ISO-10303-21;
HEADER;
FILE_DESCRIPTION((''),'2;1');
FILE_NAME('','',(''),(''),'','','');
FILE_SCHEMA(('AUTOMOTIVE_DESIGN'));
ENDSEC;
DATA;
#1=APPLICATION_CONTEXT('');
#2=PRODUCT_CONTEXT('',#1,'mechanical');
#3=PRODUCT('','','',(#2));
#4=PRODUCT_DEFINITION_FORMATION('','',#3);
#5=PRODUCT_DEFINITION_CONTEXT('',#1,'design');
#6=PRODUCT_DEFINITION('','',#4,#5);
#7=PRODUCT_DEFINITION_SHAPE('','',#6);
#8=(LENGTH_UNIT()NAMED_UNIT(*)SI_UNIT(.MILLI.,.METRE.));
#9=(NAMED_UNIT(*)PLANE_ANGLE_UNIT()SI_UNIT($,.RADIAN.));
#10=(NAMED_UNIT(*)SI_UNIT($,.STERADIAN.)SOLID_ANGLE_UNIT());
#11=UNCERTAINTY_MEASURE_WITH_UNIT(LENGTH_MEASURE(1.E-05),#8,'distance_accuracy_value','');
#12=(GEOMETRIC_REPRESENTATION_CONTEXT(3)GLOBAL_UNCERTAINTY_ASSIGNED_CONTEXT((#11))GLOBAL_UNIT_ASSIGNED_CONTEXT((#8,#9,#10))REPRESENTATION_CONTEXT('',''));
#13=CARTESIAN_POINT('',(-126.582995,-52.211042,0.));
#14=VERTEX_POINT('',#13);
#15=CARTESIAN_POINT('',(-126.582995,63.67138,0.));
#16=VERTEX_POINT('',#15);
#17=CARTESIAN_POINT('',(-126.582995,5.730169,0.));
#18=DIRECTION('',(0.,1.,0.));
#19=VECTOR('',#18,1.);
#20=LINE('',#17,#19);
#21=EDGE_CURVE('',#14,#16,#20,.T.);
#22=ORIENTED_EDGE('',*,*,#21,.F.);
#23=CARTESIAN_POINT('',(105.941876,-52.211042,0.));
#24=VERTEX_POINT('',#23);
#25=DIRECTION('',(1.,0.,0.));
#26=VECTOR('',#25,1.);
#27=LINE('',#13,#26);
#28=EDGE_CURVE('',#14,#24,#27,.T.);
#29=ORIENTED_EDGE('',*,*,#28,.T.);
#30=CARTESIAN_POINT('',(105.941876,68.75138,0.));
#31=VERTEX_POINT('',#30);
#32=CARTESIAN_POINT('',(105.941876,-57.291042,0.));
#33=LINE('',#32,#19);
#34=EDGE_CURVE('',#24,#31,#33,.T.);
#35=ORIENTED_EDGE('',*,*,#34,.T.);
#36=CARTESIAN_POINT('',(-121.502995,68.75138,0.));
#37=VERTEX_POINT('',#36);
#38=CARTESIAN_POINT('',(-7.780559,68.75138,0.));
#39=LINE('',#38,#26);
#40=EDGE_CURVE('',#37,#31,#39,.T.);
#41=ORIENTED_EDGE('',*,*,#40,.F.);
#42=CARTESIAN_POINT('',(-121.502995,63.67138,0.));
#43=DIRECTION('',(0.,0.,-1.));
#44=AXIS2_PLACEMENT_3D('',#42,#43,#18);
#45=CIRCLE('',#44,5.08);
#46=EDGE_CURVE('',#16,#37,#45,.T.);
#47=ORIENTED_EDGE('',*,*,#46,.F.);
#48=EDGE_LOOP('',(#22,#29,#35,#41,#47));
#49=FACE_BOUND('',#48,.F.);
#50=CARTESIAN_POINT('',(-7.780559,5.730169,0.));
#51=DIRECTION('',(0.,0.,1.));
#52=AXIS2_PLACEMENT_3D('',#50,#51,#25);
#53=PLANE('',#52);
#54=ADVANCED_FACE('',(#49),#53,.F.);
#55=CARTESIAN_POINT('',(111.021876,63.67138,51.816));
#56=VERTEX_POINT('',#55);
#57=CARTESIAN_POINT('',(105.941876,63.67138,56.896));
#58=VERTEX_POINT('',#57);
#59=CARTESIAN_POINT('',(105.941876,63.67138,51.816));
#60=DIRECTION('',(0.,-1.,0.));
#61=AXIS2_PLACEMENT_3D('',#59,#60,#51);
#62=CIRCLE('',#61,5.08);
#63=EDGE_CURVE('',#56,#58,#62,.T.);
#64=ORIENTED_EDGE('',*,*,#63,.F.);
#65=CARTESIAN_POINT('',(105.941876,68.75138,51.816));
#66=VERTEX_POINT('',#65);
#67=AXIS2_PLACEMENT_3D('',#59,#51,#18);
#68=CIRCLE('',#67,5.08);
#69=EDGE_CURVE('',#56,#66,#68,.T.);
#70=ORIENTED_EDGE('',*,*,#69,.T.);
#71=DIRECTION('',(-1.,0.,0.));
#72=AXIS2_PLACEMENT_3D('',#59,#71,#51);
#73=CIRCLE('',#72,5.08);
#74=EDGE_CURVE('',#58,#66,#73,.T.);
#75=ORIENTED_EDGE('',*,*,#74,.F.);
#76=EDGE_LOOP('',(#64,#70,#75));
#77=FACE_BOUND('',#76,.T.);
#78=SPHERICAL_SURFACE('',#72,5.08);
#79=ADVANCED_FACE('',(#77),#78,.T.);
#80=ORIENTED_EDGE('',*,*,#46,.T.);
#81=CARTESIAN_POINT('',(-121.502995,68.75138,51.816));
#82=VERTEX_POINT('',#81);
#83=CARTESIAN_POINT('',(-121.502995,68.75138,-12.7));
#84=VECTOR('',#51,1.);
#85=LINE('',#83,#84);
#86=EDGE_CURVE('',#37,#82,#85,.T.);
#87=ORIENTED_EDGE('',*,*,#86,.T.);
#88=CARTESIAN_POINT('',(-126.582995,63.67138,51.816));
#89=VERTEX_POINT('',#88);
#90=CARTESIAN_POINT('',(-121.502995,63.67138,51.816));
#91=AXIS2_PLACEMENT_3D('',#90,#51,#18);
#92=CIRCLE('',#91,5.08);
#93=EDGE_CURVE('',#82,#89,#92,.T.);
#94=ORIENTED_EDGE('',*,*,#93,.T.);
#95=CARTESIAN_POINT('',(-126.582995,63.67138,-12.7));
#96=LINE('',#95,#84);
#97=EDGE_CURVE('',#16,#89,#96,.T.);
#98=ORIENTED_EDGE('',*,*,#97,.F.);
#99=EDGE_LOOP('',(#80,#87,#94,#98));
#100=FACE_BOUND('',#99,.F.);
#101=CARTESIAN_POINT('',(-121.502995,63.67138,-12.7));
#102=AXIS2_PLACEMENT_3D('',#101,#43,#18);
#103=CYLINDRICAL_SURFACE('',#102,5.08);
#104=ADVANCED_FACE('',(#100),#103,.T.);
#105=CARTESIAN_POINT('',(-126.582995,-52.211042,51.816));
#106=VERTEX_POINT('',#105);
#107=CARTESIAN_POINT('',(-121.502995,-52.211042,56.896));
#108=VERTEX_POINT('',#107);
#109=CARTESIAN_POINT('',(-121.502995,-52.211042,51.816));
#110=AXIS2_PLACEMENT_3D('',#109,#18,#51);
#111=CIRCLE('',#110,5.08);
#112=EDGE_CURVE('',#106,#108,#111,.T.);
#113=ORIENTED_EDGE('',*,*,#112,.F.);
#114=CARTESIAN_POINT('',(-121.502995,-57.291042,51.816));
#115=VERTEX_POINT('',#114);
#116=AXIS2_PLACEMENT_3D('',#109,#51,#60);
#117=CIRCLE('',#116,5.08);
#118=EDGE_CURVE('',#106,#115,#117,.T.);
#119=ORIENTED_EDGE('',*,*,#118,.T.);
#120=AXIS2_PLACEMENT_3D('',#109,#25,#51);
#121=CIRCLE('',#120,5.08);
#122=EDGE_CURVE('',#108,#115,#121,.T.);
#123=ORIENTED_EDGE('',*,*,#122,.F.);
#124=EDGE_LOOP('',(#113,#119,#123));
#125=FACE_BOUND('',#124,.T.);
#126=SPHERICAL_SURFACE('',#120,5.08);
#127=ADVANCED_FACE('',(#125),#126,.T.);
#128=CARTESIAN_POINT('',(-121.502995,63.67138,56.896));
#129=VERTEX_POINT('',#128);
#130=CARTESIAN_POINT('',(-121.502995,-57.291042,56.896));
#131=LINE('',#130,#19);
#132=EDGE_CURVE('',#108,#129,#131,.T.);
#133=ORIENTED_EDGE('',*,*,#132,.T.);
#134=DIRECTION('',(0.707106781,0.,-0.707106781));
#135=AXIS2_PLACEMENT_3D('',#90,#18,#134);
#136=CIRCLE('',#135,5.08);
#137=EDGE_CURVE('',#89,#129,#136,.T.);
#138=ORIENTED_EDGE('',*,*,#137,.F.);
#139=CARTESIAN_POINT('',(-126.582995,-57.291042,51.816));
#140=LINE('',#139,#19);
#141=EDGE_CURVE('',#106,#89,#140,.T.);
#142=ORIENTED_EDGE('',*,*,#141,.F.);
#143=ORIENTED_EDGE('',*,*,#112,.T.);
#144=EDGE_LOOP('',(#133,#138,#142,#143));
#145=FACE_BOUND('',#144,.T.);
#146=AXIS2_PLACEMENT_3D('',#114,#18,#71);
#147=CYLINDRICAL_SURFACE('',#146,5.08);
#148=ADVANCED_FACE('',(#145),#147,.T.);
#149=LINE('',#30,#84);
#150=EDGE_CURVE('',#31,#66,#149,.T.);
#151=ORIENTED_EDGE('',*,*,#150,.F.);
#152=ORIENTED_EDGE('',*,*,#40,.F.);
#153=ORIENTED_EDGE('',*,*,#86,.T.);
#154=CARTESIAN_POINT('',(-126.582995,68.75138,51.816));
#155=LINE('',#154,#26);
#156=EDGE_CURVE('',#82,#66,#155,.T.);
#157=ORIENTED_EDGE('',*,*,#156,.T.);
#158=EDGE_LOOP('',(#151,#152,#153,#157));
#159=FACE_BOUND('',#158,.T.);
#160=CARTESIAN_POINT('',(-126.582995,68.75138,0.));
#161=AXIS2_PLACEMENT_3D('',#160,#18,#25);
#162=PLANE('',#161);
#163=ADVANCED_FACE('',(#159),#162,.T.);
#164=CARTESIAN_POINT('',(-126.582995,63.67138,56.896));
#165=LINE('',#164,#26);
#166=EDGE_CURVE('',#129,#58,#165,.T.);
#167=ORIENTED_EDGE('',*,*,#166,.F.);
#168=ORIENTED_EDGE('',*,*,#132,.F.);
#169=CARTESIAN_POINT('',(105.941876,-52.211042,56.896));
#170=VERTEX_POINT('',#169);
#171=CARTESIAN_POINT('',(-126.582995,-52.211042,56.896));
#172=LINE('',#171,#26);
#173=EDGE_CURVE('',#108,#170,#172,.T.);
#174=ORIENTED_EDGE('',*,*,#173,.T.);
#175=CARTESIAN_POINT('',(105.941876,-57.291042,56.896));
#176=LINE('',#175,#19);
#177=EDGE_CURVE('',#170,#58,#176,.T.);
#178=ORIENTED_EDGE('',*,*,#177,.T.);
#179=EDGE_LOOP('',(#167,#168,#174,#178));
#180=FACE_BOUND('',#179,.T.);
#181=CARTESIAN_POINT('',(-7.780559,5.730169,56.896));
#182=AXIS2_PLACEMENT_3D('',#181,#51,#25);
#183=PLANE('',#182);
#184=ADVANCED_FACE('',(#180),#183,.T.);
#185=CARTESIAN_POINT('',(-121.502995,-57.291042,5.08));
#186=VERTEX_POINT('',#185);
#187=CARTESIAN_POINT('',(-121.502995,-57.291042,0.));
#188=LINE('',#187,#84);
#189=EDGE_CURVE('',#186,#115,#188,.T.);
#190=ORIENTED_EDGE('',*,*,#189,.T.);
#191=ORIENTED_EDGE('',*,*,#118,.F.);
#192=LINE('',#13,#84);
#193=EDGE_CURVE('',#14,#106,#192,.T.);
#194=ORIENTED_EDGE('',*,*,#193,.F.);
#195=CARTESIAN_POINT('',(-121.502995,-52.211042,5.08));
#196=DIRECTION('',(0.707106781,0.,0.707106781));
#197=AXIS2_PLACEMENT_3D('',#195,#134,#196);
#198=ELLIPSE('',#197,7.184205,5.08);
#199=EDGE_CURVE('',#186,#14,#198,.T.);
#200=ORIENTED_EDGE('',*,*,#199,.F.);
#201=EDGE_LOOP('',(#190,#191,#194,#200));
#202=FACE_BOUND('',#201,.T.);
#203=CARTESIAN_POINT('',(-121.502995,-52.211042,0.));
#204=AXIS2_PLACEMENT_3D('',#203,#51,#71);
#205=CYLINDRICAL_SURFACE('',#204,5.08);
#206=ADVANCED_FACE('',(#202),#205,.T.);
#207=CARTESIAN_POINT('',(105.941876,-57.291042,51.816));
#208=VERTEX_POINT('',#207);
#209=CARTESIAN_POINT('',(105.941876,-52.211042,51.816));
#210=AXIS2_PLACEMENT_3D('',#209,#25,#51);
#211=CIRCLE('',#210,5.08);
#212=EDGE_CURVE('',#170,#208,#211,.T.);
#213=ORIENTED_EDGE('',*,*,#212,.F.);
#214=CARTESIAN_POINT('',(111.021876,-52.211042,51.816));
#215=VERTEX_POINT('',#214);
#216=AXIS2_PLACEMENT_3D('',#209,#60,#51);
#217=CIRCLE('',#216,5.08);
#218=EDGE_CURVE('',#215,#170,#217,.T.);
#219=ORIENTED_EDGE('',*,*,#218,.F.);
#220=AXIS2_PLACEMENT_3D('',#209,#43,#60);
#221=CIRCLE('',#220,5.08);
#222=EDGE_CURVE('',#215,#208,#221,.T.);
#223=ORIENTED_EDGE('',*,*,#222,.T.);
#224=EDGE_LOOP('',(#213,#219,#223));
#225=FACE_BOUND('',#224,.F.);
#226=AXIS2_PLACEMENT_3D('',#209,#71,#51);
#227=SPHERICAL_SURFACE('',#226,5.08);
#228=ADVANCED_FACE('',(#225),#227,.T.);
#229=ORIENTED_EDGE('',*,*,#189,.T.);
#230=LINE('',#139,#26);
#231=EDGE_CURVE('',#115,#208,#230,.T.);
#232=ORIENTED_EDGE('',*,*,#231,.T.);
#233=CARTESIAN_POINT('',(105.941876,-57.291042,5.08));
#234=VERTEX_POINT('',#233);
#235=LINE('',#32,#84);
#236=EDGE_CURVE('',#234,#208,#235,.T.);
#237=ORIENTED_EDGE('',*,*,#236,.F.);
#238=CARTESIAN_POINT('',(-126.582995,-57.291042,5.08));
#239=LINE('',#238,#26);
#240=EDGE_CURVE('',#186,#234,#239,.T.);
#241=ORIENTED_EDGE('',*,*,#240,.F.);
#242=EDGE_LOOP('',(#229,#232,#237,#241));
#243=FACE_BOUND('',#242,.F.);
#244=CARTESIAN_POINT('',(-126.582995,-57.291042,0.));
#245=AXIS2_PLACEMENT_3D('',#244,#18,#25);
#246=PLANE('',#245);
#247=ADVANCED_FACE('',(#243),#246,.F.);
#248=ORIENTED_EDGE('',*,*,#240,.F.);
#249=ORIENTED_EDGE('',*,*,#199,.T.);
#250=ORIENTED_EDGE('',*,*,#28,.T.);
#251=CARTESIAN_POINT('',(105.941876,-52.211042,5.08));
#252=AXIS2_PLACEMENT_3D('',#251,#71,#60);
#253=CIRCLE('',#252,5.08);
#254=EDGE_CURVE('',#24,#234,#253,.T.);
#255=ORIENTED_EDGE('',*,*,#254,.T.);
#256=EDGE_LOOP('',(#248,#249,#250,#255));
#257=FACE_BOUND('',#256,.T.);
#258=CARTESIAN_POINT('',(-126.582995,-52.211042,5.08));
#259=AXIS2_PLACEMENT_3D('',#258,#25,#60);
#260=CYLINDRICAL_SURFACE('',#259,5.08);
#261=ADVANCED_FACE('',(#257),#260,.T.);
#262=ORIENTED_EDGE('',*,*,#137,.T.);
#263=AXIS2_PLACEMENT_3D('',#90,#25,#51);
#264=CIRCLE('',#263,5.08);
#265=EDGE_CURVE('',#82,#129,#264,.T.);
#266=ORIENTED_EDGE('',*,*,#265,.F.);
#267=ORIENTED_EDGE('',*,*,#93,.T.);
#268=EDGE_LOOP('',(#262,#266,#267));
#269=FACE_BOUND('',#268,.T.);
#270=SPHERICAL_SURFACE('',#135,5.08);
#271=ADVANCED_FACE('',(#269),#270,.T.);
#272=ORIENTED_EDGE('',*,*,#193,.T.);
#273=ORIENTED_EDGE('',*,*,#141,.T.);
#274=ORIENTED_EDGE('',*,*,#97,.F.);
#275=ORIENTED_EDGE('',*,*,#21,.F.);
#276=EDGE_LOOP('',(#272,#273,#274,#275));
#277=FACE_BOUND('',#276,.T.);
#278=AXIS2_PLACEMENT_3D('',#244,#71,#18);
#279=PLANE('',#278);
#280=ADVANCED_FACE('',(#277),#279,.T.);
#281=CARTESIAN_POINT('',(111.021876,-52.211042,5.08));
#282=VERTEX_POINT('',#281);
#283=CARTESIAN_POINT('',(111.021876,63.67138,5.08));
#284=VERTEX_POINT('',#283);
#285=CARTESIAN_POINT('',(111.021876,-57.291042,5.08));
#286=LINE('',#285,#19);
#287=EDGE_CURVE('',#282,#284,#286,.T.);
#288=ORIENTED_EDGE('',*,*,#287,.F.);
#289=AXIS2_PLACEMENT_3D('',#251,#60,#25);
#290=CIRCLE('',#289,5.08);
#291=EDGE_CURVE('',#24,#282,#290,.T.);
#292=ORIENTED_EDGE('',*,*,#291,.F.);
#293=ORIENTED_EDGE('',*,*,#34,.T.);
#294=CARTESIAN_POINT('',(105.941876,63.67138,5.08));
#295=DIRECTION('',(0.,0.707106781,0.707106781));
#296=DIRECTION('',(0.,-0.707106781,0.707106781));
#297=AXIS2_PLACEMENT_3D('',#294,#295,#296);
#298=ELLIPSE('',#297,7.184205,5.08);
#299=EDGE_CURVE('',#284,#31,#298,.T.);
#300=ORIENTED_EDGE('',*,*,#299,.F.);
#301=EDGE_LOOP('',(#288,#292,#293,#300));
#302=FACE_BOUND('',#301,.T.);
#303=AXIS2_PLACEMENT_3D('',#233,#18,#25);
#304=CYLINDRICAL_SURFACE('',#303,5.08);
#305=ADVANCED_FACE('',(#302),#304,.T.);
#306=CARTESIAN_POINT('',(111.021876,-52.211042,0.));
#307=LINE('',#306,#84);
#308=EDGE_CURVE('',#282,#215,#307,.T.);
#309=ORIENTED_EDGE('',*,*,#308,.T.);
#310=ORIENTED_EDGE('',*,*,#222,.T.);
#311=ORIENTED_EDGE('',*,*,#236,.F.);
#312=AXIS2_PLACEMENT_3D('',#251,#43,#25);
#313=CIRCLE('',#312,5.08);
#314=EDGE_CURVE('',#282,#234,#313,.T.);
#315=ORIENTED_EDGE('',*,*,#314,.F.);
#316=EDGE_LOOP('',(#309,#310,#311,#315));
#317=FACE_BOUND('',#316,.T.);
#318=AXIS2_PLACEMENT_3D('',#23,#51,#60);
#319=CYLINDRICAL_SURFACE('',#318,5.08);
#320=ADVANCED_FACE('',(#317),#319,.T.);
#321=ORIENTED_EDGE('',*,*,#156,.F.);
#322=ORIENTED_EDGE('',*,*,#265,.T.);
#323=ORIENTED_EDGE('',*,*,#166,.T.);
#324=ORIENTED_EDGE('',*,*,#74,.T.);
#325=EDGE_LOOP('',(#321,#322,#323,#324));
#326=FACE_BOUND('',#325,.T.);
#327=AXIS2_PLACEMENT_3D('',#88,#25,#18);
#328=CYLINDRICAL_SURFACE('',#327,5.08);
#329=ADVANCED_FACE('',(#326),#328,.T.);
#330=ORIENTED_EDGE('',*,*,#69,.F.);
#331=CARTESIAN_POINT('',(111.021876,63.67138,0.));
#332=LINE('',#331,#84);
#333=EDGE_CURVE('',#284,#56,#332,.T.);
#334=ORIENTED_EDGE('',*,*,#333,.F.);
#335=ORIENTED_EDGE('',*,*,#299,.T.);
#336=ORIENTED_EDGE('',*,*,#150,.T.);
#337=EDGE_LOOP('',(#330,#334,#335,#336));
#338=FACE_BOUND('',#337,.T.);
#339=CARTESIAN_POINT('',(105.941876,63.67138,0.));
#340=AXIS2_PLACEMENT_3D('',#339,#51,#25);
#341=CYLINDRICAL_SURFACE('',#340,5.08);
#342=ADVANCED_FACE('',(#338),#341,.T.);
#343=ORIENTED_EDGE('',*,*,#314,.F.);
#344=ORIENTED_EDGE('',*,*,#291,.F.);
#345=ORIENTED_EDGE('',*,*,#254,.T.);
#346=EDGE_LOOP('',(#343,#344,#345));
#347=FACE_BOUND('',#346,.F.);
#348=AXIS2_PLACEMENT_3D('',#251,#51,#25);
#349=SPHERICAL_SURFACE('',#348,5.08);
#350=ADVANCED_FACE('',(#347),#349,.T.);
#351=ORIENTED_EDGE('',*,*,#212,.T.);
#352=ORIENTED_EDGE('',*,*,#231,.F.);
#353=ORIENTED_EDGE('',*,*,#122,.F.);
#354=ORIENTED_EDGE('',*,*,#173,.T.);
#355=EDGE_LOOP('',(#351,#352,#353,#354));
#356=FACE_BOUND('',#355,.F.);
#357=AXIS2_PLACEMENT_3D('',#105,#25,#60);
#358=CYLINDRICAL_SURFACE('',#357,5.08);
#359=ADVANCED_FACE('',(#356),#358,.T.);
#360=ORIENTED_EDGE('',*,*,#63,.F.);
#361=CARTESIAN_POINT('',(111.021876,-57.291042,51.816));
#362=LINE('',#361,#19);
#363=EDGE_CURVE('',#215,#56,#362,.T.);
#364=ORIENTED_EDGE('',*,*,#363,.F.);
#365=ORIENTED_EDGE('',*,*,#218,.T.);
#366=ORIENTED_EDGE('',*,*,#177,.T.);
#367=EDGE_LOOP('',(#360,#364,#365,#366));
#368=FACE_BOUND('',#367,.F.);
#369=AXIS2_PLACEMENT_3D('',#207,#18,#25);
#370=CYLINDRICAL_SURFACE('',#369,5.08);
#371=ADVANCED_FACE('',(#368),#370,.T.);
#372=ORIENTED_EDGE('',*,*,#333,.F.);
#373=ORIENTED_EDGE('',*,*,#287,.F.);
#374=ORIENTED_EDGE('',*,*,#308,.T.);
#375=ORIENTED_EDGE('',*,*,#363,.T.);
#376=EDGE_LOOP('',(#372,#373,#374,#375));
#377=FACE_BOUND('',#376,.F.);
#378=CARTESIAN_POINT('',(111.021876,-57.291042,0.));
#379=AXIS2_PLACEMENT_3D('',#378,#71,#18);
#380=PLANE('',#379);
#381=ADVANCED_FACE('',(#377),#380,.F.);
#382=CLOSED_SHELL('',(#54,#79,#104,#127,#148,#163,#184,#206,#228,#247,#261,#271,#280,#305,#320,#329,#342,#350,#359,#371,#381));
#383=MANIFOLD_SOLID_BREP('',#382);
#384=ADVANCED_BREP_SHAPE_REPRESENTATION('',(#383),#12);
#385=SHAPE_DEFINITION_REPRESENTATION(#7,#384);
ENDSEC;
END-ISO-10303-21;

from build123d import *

# Parameters (mm, degrees)
F0_W        = 237.6048713923
F0_H        = 126.0424219072
F1_DEPTH    = 56.896
F2_R        = 5.08
F3_T1_DEPTH = 64.516
F3_S5_W     = 5.08
F3_S5_H     = 5.08
F3_T6_DEPTH = 5.08


# Not quite as in the source:
# - a fillet or chamfer that OpenCascade refuses, or shapes differently, is made with other operations: its cross-section is extruded or revolved along the edge and cut away or added


with BuildPart() as f1:
    # F0 (on Top) → F1 (new body)
    with BuildSketch(Plane.XY):
        with Locations((-7.780559361, 5.7301688939)):
            Rectangle(F0_W, F0_H)
    extrude(amount=F1_DEPTH)

    # F2
    f2_edges = [f1.edges().sort_by_distance(p)[0] for p in [
        (-7.780559, -57.291042, 56.896),
        (-126.582995, 5.730169, 56.896),
        (-7.780559, 68.75138, 56.896),
        (111.021876, 5.730169, 56.896),
        (111.021876, 68.75138, 28.448),
        (111.021876, -57.291042, 28.448),
        (111.021876, 5.730169, 0),
        (-7.780559, -57.291042, 0),
        (-126.582995, -57.291042, 28.448),
    ]]
    fillet(f2_edges, radius=F2_R)

    # F3: fillet of radius 5.08 on 1 edges, made by hand

    # F3_s2 → F3_t1 (cut)
    with BuildSketch(Plane.XY.offset(-12.7)):
        with BuildLine():
            ThreePointArc((-121.5029950571, 68.7513798475), (-125.0950975055, 67.263482296), (-126.5829950571, 63.6713798475))
            Line((-126.5829950571, 63.6713798475), (-126.5829950571, 68.7513798475))
            Line((-126.5829950571, 68.7513798475), (-121.5029950571, 68.7513798475))
        make_face()
    extrude(amount=F3_T1_DEPTH, mode=Mode.SUBTRACT)


with BuildPart() as f3_tool4:
    # F3_s5 → F3_t6 (new body)
    with BuildSketch(Plane.XZ.offset(-63.6713798475)):
        with Locations((-124.0429950571, 54.356)):
            Rectangle(F3_S5_W, F3_S5_H)
    extrude(amount=-F3_T6_DEPTH)

    # F3_s7 → F3_t8 (revolve, cut)
    with BuildSketch(Plane(origin=(-121.5029950571, 63.6713798475, 51.816), x_dir=(0.7071067812, 0, -0.7071067812), z_dir=(0.7071067812, 0, 0.7071067812))):
        with BuildLine():
            ThreePointArc((0, -5.08), (5.08, 0), (0, 5.08))
            Line((0, 5.08), (0, -5.08))
        make_face()
    revolve(axis=Axis((-121.5029950571, 63.6713798475, 51.816), (0, 1, 0)), mode=Mode.SUBTRACT)


with BuildPart() as f1_1:
    add(f1.part)

    # F3_t3: cut F3_tool4
    add(f3_tool4.part, mode=Mode.SUBTRACT)


solid = f1_1.part
